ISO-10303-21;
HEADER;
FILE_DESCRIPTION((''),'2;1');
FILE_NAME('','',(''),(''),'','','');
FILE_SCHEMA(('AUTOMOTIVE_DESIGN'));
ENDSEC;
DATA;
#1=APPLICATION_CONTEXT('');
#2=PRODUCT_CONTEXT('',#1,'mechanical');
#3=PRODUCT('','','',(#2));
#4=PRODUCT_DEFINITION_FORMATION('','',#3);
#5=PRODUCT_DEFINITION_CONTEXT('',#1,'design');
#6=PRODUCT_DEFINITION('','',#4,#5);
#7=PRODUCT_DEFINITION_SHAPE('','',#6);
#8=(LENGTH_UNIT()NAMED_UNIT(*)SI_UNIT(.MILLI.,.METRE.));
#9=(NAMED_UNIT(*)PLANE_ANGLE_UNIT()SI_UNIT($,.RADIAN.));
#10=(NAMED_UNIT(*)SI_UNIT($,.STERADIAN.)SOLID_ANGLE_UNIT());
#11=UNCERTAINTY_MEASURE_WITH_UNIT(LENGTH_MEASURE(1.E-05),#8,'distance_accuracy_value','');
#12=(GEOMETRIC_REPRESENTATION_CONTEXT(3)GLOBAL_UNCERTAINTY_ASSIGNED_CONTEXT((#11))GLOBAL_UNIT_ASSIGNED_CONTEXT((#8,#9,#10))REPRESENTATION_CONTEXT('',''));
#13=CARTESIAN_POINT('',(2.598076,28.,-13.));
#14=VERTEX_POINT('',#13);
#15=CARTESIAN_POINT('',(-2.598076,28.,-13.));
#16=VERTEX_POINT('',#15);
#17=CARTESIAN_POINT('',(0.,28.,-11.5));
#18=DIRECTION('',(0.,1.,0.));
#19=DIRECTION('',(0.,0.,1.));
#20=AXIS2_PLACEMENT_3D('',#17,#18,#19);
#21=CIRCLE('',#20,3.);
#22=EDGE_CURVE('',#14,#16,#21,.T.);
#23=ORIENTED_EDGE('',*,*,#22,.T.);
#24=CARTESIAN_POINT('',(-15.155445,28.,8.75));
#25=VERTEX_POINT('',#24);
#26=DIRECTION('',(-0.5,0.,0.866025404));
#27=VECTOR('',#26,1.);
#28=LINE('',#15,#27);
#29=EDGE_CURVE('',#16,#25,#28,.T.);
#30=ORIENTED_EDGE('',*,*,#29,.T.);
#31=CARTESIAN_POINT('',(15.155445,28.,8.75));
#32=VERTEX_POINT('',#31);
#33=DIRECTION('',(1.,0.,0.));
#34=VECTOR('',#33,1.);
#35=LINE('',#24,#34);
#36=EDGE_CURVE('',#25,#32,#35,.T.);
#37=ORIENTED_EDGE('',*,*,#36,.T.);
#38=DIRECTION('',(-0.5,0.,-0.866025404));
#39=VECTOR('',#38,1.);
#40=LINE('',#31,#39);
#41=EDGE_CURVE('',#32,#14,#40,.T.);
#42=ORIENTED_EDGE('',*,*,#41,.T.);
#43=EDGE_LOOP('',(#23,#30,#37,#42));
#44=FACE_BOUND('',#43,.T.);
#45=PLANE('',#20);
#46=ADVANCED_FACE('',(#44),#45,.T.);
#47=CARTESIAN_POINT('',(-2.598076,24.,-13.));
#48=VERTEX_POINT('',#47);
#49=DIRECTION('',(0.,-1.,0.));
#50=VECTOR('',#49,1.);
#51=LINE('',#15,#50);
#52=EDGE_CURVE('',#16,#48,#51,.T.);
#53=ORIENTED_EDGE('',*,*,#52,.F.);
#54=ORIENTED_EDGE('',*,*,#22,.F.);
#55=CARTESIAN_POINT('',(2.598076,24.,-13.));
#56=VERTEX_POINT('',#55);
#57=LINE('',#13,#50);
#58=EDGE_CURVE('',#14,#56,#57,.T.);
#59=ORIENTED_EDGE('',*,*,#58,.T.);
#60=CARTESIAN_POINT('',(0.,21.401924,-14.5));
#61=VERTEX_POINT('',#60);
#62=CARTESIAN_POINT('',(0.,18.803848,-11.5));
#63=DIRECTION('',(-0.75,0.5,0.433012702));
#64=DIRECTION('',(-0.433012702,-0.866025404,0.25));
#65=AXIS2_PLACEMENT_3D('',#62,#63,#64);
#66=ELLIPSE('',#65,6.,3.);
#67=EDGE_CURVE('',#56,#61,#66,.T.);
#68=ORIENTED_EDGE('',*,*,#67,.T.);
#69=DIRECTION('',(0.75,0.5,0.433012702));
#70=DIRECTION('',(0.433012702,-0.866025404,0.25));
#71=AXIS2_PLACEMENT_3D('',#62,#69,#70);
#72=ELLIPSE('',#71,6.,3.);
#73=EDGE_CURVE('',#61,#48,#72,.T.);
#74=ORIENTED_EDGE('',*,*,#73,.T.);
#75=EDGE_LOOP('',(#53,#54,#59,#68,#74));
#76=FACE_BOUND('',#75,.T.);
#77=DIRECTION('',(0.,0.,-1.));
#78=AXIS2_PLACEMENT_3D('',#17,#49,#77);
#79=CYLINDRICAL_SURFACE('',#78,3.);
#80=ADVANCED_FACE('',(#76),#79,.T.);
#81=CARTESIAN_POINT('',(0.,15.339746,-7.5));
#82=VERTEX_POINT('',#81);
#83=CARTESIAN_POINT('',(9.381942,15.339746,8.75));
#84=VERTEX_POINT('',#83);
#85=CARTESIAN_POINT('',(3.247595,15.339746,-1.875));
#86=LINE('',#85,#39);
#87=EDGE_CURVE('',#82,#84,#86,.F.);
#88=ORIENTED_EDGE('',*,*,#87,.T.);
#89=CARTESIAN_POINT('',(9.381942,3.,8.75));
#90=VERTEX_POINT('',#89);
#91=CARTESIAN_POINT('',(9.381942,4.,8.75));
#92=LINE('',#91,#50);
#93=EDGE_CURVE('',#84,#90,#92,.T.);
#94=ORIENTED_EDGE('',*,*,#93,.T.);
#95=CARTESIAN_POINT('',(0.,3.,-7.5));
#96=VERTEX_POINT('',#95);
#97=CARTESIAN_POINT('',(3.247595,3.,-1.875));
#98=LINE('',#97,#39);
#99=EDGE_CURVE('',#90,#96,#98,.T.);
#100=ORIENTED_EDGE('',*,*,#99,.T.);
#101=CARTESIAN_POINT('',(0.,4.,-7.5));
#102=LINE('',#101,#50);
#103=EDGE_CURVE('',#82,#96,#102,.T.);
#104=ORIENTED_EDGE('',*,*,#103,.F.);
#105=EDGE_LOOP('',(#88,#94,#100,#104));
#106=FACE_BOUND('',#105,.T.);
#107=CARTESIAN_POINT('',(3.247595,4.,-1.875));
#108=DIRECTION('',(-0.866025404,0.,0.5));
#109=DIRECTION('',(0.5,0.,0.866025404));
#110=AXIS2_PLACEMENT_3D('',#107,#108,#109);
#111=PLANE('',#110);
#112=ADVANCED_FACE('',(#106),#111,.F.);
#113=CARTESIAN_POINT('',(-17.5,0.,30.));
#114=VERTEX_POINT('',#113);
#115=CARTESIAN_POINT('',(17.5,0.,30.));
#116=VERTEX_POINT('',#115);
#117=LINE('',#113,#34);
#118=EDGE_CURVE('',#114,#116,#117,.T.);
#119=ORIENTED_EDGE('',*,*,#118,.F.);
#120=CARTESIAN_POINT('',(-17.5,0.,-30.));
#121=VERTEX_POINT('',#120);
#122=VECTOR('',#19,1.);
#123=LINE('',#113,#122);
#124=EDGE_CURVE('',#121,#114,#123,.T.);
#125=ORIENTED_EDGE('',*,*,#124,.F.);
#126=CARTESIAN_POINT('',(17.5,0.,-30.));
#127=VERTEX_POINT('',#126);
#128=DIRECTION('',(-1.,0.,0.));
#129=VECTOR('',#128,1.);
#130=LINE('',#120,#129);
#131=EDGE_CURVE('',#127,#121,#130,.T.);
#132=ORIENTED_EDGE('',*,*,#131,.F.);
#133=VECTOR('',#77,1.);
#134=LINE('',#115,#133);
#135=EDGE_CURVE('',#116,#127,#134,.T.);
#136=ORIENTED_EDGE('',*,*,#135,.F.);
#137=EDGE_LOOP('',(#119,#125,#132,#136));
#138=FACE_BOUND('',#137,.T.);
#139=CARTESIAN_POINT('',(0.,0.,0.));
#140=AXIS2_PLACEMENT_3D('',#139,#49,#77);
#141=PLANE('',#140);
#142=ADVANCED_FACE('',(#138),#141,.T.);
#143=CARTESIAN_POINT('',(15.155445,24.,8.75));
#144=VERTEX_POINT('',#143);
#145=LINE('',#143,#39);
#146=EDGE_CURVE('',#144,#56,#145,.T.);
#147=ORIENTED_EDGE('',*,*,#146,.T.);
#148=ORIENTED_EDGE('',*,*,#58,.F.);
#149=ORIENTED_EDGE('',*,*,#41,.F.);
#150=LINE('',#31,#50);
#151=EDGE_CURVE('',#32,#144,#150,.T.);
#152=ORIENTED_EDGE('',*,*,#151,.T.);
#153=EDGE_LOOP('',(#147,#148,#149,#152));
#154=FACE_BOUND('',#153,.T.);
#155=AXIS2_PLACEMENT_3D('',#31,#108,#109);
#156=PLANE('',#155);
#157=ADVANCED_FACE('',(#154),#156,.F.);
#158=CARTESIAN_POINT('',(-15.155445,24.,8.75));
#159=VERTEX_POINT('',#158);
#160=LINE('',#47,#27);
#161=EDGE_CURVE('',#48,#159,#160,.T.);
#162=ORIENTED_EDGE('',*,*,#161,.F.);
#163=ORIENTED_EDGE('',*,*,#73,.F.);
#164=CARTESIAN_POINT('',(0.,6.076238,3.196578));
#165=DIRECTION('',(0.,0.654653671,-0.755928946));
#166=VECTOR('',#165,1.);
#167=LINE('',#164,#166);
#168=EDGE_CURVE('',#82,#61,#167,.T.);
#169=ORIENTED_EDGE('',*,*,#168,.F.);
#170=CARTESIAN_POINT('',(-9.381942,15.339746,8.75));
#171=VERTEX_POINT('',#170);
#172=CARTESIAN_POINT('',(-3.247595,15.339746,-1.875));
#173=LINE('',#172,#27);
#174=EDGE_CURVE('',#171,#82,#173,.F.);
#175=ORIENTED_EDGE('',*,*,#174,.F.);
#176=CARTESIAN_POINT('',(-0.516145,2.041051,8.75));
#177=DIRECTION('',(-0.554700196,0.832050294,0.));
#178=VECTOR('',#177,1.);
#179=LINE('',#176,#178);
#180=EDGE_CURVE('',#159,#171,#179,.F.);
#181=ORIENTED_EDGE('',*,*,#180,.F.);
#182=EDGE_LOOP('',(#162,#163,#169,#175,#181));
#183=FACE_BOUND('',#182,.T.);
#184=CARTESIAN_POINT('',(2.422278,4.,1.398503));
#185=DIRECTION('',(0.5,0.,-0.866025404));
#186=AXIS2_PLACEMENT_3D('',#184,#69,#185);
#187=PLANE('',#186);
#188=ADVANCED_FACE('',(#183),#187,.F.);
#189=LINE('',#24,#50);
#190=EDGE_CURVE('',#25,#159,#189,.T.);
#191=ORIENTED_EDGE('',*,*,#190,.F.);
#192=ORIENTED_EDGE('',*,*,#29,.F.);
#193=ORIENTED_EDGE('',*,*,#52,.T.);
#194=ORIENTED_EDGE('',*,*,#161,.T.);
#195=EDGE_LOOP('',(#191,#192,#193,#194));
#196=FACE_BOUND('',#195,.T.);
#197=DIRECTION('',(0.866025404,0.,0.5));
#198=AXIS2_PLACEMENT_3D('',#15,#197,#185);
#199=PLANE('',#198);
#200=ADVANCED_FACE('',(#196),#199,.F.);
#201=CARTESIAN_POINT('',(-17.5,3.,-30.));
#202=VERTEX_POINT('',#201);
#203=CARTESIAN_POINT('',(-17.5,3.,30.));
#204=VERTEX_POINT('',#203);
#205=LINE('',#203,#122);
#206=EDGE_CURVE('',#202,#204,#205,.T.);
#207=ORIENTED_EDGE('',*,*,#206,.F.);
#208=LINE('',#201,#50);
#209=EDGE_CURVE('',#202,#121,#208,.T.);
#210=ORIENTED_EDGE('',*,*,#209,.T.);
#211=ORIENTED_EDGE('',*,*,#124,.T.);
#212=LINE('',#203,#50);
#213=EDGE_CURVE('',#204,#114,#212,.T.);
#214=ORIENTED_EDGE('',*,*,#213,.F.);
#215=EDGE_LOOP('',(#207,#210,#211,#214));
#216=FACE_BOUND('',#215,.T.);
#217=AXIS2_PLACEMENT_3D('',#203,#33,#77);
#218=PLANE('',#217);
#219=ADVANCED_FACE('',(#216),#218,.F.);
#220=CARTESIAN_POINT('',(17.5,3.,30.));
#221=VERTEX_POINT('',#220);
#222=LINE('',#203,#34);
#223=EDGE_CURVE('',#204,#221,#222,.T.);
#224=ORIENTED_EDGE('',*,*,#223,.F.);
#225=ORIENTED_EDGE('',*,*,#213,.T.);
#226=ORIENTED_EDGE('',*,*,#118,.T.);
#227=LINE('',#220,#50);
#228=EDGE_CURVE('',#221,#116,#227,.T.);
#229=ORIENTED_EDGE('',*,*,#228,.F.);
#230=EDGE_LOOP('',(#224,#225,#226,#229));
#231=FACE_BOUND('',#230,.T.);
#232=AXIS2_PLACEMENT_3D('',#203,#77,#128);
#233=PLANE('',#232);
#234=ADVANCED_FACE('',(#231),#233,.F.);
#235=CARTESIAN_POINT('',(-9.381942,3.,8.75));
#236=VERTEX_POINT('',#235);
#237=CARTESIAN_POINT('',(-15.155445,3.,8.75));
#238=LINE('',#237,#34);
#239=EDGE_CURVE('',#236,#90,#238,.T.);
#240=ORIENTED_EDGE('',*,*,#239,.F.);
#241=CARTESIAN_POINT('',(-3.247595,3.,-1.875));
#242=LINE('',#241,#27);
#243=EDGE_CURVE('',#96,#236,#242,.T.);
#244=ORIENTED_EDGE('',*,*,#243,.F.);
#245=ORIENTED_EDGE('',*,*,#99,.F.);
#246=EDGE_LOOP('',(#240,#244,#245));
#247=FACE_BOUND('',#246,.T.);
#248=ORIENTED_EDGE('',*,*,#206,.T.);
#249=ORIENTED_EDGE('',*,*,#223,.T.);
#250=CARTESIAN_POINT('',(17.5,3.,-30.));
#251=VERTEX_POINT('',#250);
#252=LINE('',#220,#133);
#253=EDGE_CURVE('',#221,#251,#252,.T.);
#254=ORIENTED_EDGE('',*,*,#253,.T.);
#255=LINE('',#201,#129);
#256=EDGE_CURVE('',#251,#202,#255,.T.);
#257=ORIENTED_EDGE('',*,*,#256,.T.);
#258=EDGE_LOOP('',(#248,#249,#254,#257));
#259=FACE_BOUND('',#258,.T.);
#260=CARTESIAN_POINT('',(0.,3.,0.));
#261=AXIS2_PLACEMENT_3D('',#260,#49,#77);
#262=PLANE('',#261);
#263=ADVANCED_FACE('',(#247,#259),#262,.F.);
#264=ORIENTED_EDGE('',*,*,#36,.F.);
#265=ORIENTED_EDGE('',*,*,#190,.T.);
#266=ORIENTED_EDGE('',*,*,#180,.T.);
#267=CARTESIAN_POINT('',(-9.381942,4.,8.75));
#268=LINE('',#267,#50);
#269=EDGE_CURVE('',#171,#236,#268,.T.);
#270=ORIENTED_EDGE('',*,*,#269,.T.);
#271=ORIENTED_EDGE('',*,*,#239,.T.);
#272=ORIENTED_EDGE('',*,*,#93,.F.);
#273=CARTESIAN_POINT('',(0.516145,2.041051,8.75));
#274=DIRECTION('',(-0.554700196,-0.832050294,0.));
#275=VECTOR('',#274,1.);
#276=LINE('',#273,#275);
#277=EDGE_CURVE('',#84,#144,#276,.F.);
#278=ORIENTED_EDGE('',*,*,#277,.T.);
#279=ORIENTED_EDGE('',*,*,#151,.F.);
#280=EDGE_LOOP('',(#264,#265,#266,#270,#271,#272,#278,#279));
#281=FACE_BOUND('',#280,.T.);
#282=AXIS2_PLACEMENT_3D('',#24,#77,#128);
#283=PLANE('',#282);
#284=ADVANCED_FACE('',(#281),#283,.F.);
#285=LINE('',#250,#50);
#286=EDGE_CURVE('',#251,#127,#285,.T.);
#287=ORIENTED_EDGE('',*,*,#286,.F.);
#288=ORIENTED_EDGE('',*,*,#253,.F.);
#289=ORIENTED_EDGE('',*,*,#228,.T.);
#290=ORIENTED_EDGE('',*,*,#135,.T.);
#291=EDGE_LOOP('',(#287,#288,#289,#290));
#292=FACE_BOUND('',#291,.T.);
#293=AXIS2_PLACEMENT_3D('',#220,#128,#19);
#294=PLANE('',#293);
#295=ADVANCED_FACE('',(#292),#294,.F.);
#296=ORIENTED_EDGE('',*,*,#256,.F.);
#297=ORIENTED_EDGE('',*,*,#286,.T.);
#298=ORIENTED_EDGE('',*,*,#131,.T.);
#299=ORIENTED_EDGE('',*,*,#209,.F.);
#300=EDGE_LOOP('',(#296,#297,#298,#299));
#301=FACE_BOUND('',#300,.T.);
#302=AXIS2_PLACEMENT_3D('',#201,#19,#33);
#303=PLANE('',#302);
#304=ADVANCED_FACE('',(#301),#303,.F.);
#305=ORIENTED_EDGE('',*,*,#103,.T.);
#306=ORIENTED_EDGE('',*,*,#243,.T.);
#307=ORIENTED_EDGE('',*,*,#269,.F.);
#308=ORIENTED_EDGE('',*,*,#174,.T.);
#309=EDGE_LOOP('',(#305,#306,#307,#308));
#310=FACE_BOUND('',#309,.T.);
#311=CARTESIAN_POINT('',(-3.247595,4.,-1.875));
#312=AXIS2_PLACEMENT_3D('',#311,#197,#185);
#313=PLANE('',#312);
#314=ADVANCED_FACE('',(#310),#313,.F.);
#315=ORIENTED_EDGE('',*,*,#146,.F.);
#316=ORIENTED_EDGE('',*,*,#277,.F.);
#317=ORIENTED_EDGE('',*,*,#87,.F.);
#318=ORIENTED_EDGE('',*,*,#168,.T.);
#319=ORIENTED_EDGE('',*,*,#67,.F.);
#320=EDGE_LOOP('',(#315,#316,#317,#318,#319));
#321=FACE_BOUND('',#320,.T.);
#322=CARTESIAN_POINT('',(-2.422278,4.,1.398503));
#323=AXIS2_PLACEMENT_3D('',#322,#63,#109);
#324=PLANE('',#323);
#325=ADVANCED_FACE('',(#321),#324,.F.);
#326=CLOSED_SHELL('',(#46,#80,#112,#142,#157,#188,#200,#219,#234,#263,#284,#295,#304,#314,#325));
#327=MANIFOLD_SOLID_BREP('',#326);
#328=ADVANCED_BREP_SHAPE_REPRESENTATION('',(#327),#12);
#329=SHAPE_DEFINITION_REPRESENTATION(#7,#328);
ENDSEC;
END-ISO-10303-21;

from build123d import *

# Parameters (mm, degrees)
SKETCH1_W           = 35
SKETCH1_H           = 60
BOSS_EXTRUDE1_DEPTH = 3
BOSS_EXTRUDE2_DEPTH = 25
CUT_EXTRUDE1_DEPTH  = 1
CHAMFER1_SIZE       = 11.547005384
CHAMFER1_SIZE_2     = 20


with BuildPart() as part:
    # Sketch1 → Boss-Extrude1 (new body)
    with BuildSketch(Plane(origin=(0, 0, 0), x_dir=(1, 0, 0), z_dir=(0, 1, 0))):
        Rectangle(SKETCH1_W, SKETCH1_H)
    extrude(amount=BOSS_EXTRUDE1_DEPTH)

    # Sketch2 → Boss-Extrude2 (add)
    with BuildSketch(Plane(origin=(0, 3, 0), x_dir=(1, 0, 0), z_dir=(0, 1, 0))):
        with BuildLine():
            Line((-2.598076211, 13), (-15.155444566, -8.75))
            Line((-15.155444566, -8.75), (15.155444566, -8.75))
            Line((15.155444566, -8.75), (2.598076211, 13))
            ThreePointArc((2.598076211, 13), (0, 14.5), (-2.598076211, 13))
        make_face()
    extrude(amount=BOSS_EXTRUDE2_DEPTH)

    # Sketch3 → Cut-Extrude1 (cut)
    with BuildSketch(Plane(origin=(0, 3, 0), x_dir=(1, 0, 0), z_dir=(0, 1, 0))):
        with BuildLine():
            Line((-6.495190528, -3.75), (0, 7.5))
            Line((0, 7.5), (6.495190528, -3.75))
            Line((6.495190528, -3.75), (9.381941874, -8.75))
            Line((9.381941874, -8.75), (15.155444566, -8.75))
            Line((15.155444566, -8.75), (2.598076211, 13))
            ThreePointArc((2.598076211, 13), (0, 14.5), (-2.598076211, 13))
            Line((-2.598076211, 13), (-15.155444566, -8.75))
            Line((-15.155444566, -8.75), (-9.381941874, -8.75))
            Line((-9.381941874, -8.75), (-6.495190528, -3.75))
        make_face()
    extrude(amount=CUT_EXTRUDE1_DEPTH, mode=Mode.SUBTRACT)

    # Chamfer1
    # the kernel refuses this chamfer: 20, 11.547005384 mm, written as the material it takes off along each edge
    with BuildSketch(Plane(origin=(41.026302113, 4, 53.559639706), x_dir=(-0.8645728572665647, -0.057893862402670825, 0.4991613718769001), z_dir=(-0.5000000000000038, 0, -0.8660254037844365))) as chamfer1_piece_1_section:
        Polygon((CHAMFER1_SIZE * 0.998322743736, CHAMFER1_SIZE * 0.0578938624016), (-CHAMFER1_SIZE_2 * 0.0578938624027, CHAMFER1_SIZE_2 * 0.998322743754), (0, 0), align=None)
    chamfer1_piece_1 = extrude(amount=128.598166896, mode=Mode.PRIVATE)
    chamfer1_piece_1 = split(chamfer1_piece_1, bisect_by=Plane(origin=(4.860727158, 12.114805615, 0.9190264), z_dir=(0.8660254037844364, 0, -0.500000000000004)), keep=Keep.TOP, mode=Mode.PRIVATE)
    add(chamfer1_piece_1, mode=Mode.SUBTRACT)
    with BuildSketch(Plane(origin=(41.026302113, 4, 53.559639706), x_dir=(-0.8645728572665647, -0.057893862402670825, 0.4991613718769001), z_dir=(-0.5000000000000038, 0, -0.8660254037844365))) as chamfer1_piece_2_section:
        Polygon((CHAMFER1_SIZE * 0.998322743736, CHAMFER1_SIZE * 0.0578938624016), (-CHAMFER1_SIZE_2 * 0.0578938624027, CHAMFER1_SIZE_2 * 0.998322743754), (0, 0), align=None)
    chamfer1_piece_2 = extrude(amount=128.598166896, mode=Mode.PRIVATE)
    chamfer1_piece_2 = split(chamfer1_piece_2, bisect_by=Plane(origin=(-0.762291107, 7.498768365, -6.179673073), z_dir=(-0.8660254037844386, 0, -0.5000000000000001)), keep=Keep.TOP, mode=Mode.PRIVATE)
    add(chamfer1_piece_2, mode=Mode.SUBTRACT)
    with BuildSketch(Plane(origin=(23.272781335, 4, -57.809639706), x_dir=(0.864572857266568, -0.05789386240267081, 0.49916137187689447), z_dir=(-0.49999999999999817, 0, 0.8660254037844398))) as chamfer1_piece_3_section:
        Polygon((CHAMFER1_SIZE * 0.998322743736, CHAMFER1_SIZE * 0.0578938624016), (-CHAMFER1_SIZE_2 * 0.0578938624027, CHAMFER1_SIZE_2 * 0.998322743754), (0, 0), align=None)
    chamfer1_piece_3 = extrude(amount=128.598166896, mode=Mode.PRIVATE)
    chamfer1_piece_3 = split(chamfer1_piece_3, bisect_by=Plane(origin=(0.762291107, 7.498768365, -6.179673073), z_dir=(0.8660254037844364, 0, -0.500000000000004)), keep=Keep.TOP, mode=Mode.PRIVATE)
    add(chamfer1_piece_3, mode=Mode.SUBTRACT)
    with BuildSketch(Plane(origin=(23.272781335, 4, -57.809639706), x_dir=(0.864572857266568, -0.05789386240267081, 0.49916137187689447), z_dir=(-0.49999999999999817, 0, 0.8660254037844398))) as chamfer1_piece_4_section:
        Polygon((CHAMFER1_SIZE * 0.998322743736, CHAMFER1_SIZE * 0.0578938624016), (-CHAMFER1_SIZE_2 * 0.0578938624027, CHAMFER1_SIZE_2 * 0.998322743754), (0, 0), align=None)
    chamfer1_piece_4 = extrude(amount=128.598166896, mode=Mode.PRIVATE)
    chamfer1_piece_4 = split(chamfer1_piece_4, bisect_by=Plane(origin=(-4.860727158, 12.114805615, 0.9190264), z_dir=(-0.8660254037844386, 0, -0.5000000000000001)), keep=Keep.TOP, mode=Mode.PRIVATE)
    add(chamfer1_piece_4, mode=Mode.SUBTRACT)


solid = part.part
